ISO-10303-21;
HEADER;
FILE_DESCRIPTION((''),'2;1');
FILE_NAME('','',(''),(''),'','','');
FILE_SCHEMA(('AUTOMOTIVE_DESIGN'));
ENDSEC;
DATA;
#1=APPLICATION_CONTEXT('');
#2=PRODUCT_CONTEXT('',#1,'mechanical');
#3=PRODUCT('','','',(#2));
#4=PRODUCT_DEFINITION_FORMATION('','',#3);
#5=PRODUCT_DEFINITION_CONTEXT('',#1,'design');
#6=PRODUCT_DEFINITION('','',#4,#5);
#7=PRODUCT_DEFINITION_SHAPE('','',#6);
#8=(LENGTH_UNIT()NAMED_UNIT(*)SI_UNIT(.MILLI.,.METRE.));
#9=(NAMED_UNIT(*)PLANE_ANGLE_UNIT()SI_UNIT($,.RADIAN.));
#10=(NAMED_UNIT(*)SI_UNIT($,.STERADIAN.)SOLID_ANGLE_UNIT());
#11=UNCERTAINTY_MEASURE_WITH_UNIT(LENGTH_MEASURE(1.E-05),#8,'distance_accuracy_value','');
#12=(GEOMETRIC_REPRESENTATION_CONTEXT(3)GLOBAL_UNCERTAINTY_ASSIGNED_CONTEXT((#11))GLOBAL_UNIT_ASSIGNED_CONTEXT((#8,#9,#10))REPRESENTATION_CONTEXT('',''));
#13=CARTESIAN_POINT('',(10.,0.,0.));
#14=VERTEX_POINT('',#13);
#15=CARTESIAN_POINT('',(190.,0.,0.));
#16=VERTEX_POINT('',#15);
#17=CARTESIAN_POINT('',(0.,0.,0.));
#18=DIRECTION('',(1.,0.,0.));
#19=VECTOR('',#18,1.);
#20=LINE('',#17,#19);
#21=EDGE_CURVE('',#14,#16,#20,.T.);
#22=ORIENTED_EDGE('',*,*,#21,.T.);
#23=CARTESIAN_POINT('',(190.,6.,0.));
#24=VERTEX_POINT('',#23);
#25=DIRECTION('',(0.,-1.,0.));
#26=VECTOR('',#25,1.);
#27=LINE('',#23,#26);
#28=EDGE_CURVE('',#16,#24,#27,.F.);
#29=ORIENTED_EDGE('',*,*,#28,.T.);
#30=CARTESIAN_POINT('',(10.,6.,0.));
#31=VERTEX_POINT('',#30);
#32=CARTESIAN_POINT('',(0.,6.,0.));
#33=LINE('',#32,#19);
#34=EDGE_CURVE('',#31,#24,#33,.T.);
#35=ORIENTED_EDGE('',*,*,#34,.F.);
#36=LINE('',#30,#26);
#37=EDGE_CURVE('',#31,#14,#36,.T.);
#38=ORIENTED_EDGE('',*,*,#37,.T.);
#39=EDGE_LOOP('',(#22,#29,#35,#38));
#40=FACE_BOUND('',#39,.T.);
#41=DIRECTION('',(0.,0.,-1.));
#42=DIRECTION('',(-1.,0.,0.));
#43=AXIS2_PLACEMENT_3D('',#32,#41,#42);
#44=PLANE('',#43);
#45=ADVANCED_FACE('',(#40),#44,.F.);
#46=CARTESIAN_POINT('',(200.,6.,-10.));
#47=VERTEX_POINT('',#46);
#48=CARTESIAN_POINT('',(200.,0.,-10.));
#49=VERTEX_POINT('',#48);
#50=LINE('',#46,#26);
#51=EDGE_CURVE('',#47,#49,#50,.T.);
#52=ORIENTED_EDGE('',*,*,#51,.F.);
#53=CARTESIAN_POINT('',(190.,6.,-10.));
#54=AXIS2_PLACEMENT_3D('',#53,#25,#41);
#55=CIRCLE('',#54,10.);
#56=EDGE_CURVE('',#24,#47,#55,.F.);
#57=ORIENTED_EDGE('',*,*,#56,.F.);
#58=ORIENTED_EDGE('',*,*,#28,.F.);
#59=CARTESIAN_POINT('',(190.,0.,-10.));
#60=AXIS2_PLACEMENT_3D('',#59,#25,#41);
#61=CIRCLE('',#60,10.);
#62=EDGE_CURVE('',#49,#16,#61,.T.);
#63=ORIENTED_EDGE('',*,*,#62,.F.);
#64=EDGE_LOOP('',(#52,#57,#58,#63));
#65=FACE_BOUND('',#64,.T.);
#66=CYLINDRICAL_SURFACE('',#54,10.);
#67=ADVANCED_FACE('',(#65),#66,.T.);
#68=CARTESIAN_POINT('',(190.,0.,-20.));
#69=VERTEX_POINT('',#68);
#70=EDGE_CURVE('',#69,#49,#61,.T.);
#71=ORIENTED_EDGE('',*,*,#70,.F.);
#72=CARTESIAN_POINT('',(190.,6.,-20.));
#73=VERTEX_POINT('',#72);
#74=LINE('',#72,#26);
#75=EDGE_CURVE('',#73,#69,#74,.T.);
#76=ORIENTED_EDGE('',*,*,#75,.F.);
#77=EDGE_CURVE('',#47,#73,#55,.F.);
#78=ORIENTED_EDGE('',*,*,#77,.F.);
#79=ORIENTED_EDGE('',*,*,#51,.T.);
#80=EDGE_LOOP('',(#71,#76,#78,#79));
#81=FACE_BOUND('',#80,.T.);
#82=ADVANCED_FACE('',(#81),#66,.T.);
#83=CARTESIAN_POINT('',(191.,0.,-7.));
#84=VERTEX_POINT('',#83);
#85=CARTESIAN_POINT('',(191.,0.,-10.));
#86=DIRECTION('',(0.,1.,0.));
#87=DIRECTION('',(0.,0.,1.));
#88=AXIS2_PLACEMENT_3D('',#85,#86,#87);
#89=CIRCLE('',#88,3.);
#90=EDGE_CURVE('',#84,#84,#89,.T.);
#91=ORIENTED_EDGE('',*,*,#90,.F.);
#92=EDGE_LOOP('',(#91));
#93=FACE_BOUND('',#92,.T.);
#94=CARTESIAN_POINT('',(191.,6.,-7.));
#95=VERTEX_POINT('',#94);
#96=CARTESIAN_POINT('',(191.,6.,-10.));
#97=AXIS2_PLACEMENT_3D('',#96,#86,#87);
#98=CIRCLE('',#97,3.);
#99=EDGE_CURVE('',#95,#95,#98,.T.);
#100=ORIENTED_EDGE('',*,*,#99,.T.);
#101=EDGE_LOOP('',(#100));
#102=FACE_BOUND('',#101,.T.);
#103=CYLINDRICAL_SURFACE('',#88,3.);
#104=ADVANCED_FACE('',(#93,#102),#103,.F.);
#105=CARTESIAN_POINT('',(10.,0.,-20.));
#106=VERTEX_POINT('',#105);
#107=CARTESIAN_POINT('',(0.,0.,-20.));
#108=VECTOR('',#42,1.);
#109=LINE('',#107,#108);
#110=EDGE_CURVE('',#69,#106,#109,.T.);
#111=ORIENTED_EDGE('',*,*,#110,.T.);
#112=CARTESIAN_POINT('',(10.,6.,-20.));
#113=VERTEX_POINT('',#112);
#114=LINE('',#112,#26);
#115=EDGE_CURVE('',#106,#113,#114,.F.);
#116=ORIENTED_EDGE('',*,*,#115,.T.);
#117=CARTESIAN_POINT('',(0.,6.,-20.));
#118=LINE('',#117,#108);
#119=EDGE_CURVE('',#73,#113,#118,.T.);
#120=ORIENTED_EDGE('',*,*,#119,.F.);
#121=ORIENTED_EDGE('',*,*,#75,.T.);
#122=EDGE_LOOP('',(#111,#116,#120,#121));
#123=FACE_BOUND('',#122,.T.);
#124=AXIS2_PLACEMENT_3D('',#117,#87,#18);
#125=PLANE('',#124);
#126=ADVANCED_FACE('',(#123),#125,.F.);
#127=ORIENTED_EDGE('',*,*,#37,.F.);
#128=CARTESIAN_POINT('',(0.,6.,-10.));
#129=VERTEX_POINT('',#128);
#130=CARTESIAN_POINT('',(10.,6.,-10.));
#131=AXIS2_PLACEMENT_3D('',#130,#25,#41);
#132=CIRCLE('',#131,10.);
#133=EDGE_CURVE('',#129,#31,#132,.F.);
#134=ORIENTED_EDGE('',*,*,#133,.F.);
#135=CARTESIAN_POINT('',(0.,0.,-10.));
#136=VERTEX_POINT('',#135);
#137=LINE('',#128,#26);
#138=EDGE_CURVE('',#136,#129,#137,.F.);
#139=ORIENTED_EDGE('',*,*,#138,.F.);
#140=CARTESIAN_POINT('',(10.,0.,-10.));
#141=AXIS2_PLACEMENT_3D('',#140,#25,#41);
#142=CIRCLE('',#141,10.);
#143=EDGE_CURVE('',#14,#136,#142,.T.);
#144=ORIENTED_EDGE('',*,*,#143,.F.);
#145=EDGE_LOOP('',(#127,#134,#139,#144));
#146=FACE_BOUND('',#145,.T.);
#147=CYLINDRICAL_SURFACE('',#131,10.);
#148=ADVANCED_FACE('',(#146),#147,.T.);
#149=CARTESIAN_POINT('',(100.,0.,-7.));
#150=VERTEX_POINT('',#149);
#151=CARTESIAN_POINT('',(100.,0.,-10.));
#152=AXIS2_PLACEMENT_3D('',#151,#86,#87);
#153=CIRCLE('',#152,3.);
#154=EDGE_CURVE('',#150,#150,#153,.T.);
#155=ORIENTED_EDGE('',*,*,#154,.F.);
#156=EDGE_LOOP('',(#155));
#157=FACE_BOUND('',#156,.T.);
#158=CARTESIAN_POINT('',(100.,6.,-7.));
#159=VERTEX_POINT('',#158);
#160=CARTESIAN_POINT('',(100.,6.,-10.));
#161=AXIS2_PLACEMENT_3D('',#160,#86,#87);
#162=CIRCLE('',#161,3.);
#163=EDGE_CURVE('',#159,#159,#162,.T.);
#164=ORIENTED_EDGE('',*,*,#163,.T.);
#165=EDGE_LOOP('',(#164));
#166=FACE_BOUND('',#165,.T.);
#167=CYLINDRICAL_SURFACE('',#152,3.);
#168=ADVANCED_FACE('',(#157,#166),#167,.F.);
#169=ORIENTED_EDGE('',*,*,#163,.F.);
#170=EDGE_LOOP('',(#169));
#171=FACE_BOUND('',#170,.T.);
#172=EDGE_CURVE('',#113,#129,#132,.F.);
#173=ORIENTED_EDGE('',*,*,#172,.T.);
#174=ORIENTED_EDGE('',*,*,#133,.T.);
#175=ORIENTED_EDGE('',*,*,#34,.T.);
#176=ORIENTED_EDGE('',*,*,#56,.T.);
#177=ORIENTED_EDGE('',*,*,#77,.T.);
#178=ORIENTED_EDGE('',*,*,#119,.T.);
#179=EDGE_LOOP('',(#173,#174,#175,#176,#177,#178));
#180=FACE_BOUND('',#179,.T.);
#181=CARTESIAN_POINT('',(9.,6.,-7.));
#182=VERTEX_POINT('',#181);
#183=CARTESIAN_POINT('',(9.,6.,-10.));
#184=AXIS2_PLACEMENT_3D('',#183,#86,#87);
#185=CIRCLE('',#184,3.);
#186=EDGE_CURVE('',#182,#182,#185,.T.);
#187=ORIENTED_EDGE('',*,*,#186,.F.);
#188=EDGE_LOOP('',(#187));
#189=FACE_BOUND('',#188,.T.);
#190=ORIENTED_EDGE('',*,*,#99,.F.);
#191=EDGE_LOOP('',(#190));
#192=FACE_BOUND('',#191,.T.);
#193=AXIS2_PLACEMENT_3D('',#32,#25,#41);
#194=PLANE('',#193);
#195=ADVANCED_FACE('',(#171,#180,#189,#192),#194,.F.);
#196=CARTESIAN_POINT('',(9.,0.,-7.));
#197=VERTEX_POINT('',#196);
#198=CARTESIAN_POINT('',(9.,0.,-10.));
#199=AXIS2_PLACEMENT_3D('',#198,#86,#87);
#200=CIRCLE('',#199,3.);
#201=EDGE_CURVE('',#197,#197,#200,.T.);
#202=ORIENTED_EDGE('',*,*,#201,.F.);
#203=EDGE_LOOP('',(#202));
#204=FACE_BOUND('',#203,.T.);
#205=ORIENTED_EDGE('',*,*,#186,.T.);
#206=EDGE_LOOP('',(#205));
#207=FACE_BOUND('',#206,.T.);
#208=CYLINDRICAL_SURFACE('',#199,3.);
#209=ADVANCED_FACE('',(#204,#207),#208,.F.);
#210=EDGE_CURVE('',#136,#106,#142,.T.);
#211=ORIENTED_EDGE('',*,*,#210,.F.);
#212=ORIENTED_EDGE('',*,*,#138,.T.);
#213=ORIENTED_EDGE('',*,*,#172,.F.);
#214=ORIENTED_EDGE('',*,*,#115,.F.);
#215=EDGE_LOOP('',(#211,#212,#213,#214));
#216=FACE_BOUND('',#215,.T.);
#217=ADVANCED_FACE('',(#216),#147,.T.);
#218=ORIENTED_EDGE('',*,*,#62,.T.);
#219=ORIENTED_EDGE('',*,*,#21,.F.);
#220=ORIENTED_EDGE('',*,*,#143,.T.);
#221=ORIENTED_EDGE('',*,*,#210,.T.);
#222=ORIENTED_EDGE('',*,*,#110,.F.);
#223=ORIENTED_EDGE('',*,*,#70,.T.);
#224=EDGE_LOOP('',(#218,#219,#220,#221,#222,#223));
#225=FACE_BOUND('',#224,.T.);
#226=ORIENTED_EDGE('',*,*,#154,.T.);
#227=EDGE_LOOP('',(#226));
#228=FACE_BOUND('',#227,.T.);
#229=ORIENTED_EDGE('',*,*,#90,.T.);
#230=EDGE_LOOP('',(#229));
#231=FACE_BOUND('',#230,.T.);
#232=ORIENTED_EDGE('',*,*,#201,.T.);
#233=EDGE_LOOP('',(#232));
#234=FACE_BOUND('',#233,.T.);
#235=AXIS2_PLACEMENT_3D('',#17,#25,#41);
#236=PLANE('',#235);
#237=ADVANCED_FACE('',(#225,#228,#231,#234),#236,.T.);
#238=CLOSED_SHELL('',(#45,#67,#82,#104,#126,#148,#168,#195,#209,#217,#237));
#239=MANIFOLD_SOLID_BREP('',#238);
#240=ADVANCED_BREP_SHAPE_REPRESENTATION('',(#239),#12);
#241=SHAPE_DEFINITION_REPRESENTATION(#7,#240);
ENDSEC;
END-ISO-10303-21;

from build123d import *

# Parameters (mm, degrees)
SKETCH2_W           = 200
SKETCH2_H           = 20
BOSS_EXTRUDE1_DEPTH = 6
SKETCH3_R           = 3
CUT_EXTRUDE1_DEPTH  = 202.087045828
SKETCH4_R           = 3
CUT_EXTRUDE2_DEPTH  = 202.087045828
FILLET1_R           = 10
FILLET2_R           = 10
SKETCH6_R           = 3
CUT_EXTRUDE3_DEPTH  = 202.087045828


with BuildPart() as part:
    # Sketch2 → Boss-Extrude1 (new body)
    with BuildSketch(Plane(origin=(0, 0, 0), x_dir=(1, 0, 0), z_dir=(0, 1, 0))):
        with Locations((100, 10)):
            Rectangle(SKETCH2_W, SKETCH2_H)
    extrude(amount=BOSS_EXTRUDE1_DEPTH)

    # Sketch3 → Cut-Extrude1 (cut, through all)
    with BuildSketch(Plane(origin=(0, 6, 0), x_dir=(1, 0, 0), z_dir=(0, 1, 0))):
        with Locations(Location((9, 10, 0), (0, 0, 270))):
            Circle(SKETCH3_R)
    extrude(amount=-CUT_EXTRUDE1_DEPTH, mode=Mode.SUBTRACT)

    # Sketch4 → Cut-Extrude2 (cut, through all)
    with BuildSketch(Plane(origin=(0, 6, 0), x_dir=(1, 0, 0), z_dir=(0, 1, 0))):
        with Locations(Location((191, 10, 0), (0, 0, 270))):
            Circle(SKETCH4_R)
    extrude(amount=-CUT_EXTRUDE2_DEPTH, mode=Mode.SUBTRACT)

    # Fillet1
    fillet1_edges = [part.edges().sort_by_distance(p)[0] for p in [
        (0, 3, -20),
        (0, 3, 0),
    ]]
    fillet(fillet1_edges, radius=FILLET1_R - 0.0001)  # a hair under: the kernel refuses the full size

    # Fillet2
    fillet2_edges = [part.edges().sort_by_distance(p)[0] for p in [
        (200, 3, -20),
        (200, 3, 0),
    ]]
    fillet(fillet2_edges, radius=FILLET2_R - 0.0001)  # a hair under: the kernel refuses the full size

    # Sketch6 → Cut-Extrude3 (cut, through all)
    with BuildSketch(Plane(origin=(0, 6, 0), x_dir=(1, 0, 0), z_dir=(0, 1, 0))):
        with Locations(Location((100, 10, 0), (0, 0, 270))):
            Circle(SKETCH6_R)
    extrude(amount=-CUT_EXTRUDE3_DEPTH, mode=Mode.SUBTRACT)


solid = part.part
